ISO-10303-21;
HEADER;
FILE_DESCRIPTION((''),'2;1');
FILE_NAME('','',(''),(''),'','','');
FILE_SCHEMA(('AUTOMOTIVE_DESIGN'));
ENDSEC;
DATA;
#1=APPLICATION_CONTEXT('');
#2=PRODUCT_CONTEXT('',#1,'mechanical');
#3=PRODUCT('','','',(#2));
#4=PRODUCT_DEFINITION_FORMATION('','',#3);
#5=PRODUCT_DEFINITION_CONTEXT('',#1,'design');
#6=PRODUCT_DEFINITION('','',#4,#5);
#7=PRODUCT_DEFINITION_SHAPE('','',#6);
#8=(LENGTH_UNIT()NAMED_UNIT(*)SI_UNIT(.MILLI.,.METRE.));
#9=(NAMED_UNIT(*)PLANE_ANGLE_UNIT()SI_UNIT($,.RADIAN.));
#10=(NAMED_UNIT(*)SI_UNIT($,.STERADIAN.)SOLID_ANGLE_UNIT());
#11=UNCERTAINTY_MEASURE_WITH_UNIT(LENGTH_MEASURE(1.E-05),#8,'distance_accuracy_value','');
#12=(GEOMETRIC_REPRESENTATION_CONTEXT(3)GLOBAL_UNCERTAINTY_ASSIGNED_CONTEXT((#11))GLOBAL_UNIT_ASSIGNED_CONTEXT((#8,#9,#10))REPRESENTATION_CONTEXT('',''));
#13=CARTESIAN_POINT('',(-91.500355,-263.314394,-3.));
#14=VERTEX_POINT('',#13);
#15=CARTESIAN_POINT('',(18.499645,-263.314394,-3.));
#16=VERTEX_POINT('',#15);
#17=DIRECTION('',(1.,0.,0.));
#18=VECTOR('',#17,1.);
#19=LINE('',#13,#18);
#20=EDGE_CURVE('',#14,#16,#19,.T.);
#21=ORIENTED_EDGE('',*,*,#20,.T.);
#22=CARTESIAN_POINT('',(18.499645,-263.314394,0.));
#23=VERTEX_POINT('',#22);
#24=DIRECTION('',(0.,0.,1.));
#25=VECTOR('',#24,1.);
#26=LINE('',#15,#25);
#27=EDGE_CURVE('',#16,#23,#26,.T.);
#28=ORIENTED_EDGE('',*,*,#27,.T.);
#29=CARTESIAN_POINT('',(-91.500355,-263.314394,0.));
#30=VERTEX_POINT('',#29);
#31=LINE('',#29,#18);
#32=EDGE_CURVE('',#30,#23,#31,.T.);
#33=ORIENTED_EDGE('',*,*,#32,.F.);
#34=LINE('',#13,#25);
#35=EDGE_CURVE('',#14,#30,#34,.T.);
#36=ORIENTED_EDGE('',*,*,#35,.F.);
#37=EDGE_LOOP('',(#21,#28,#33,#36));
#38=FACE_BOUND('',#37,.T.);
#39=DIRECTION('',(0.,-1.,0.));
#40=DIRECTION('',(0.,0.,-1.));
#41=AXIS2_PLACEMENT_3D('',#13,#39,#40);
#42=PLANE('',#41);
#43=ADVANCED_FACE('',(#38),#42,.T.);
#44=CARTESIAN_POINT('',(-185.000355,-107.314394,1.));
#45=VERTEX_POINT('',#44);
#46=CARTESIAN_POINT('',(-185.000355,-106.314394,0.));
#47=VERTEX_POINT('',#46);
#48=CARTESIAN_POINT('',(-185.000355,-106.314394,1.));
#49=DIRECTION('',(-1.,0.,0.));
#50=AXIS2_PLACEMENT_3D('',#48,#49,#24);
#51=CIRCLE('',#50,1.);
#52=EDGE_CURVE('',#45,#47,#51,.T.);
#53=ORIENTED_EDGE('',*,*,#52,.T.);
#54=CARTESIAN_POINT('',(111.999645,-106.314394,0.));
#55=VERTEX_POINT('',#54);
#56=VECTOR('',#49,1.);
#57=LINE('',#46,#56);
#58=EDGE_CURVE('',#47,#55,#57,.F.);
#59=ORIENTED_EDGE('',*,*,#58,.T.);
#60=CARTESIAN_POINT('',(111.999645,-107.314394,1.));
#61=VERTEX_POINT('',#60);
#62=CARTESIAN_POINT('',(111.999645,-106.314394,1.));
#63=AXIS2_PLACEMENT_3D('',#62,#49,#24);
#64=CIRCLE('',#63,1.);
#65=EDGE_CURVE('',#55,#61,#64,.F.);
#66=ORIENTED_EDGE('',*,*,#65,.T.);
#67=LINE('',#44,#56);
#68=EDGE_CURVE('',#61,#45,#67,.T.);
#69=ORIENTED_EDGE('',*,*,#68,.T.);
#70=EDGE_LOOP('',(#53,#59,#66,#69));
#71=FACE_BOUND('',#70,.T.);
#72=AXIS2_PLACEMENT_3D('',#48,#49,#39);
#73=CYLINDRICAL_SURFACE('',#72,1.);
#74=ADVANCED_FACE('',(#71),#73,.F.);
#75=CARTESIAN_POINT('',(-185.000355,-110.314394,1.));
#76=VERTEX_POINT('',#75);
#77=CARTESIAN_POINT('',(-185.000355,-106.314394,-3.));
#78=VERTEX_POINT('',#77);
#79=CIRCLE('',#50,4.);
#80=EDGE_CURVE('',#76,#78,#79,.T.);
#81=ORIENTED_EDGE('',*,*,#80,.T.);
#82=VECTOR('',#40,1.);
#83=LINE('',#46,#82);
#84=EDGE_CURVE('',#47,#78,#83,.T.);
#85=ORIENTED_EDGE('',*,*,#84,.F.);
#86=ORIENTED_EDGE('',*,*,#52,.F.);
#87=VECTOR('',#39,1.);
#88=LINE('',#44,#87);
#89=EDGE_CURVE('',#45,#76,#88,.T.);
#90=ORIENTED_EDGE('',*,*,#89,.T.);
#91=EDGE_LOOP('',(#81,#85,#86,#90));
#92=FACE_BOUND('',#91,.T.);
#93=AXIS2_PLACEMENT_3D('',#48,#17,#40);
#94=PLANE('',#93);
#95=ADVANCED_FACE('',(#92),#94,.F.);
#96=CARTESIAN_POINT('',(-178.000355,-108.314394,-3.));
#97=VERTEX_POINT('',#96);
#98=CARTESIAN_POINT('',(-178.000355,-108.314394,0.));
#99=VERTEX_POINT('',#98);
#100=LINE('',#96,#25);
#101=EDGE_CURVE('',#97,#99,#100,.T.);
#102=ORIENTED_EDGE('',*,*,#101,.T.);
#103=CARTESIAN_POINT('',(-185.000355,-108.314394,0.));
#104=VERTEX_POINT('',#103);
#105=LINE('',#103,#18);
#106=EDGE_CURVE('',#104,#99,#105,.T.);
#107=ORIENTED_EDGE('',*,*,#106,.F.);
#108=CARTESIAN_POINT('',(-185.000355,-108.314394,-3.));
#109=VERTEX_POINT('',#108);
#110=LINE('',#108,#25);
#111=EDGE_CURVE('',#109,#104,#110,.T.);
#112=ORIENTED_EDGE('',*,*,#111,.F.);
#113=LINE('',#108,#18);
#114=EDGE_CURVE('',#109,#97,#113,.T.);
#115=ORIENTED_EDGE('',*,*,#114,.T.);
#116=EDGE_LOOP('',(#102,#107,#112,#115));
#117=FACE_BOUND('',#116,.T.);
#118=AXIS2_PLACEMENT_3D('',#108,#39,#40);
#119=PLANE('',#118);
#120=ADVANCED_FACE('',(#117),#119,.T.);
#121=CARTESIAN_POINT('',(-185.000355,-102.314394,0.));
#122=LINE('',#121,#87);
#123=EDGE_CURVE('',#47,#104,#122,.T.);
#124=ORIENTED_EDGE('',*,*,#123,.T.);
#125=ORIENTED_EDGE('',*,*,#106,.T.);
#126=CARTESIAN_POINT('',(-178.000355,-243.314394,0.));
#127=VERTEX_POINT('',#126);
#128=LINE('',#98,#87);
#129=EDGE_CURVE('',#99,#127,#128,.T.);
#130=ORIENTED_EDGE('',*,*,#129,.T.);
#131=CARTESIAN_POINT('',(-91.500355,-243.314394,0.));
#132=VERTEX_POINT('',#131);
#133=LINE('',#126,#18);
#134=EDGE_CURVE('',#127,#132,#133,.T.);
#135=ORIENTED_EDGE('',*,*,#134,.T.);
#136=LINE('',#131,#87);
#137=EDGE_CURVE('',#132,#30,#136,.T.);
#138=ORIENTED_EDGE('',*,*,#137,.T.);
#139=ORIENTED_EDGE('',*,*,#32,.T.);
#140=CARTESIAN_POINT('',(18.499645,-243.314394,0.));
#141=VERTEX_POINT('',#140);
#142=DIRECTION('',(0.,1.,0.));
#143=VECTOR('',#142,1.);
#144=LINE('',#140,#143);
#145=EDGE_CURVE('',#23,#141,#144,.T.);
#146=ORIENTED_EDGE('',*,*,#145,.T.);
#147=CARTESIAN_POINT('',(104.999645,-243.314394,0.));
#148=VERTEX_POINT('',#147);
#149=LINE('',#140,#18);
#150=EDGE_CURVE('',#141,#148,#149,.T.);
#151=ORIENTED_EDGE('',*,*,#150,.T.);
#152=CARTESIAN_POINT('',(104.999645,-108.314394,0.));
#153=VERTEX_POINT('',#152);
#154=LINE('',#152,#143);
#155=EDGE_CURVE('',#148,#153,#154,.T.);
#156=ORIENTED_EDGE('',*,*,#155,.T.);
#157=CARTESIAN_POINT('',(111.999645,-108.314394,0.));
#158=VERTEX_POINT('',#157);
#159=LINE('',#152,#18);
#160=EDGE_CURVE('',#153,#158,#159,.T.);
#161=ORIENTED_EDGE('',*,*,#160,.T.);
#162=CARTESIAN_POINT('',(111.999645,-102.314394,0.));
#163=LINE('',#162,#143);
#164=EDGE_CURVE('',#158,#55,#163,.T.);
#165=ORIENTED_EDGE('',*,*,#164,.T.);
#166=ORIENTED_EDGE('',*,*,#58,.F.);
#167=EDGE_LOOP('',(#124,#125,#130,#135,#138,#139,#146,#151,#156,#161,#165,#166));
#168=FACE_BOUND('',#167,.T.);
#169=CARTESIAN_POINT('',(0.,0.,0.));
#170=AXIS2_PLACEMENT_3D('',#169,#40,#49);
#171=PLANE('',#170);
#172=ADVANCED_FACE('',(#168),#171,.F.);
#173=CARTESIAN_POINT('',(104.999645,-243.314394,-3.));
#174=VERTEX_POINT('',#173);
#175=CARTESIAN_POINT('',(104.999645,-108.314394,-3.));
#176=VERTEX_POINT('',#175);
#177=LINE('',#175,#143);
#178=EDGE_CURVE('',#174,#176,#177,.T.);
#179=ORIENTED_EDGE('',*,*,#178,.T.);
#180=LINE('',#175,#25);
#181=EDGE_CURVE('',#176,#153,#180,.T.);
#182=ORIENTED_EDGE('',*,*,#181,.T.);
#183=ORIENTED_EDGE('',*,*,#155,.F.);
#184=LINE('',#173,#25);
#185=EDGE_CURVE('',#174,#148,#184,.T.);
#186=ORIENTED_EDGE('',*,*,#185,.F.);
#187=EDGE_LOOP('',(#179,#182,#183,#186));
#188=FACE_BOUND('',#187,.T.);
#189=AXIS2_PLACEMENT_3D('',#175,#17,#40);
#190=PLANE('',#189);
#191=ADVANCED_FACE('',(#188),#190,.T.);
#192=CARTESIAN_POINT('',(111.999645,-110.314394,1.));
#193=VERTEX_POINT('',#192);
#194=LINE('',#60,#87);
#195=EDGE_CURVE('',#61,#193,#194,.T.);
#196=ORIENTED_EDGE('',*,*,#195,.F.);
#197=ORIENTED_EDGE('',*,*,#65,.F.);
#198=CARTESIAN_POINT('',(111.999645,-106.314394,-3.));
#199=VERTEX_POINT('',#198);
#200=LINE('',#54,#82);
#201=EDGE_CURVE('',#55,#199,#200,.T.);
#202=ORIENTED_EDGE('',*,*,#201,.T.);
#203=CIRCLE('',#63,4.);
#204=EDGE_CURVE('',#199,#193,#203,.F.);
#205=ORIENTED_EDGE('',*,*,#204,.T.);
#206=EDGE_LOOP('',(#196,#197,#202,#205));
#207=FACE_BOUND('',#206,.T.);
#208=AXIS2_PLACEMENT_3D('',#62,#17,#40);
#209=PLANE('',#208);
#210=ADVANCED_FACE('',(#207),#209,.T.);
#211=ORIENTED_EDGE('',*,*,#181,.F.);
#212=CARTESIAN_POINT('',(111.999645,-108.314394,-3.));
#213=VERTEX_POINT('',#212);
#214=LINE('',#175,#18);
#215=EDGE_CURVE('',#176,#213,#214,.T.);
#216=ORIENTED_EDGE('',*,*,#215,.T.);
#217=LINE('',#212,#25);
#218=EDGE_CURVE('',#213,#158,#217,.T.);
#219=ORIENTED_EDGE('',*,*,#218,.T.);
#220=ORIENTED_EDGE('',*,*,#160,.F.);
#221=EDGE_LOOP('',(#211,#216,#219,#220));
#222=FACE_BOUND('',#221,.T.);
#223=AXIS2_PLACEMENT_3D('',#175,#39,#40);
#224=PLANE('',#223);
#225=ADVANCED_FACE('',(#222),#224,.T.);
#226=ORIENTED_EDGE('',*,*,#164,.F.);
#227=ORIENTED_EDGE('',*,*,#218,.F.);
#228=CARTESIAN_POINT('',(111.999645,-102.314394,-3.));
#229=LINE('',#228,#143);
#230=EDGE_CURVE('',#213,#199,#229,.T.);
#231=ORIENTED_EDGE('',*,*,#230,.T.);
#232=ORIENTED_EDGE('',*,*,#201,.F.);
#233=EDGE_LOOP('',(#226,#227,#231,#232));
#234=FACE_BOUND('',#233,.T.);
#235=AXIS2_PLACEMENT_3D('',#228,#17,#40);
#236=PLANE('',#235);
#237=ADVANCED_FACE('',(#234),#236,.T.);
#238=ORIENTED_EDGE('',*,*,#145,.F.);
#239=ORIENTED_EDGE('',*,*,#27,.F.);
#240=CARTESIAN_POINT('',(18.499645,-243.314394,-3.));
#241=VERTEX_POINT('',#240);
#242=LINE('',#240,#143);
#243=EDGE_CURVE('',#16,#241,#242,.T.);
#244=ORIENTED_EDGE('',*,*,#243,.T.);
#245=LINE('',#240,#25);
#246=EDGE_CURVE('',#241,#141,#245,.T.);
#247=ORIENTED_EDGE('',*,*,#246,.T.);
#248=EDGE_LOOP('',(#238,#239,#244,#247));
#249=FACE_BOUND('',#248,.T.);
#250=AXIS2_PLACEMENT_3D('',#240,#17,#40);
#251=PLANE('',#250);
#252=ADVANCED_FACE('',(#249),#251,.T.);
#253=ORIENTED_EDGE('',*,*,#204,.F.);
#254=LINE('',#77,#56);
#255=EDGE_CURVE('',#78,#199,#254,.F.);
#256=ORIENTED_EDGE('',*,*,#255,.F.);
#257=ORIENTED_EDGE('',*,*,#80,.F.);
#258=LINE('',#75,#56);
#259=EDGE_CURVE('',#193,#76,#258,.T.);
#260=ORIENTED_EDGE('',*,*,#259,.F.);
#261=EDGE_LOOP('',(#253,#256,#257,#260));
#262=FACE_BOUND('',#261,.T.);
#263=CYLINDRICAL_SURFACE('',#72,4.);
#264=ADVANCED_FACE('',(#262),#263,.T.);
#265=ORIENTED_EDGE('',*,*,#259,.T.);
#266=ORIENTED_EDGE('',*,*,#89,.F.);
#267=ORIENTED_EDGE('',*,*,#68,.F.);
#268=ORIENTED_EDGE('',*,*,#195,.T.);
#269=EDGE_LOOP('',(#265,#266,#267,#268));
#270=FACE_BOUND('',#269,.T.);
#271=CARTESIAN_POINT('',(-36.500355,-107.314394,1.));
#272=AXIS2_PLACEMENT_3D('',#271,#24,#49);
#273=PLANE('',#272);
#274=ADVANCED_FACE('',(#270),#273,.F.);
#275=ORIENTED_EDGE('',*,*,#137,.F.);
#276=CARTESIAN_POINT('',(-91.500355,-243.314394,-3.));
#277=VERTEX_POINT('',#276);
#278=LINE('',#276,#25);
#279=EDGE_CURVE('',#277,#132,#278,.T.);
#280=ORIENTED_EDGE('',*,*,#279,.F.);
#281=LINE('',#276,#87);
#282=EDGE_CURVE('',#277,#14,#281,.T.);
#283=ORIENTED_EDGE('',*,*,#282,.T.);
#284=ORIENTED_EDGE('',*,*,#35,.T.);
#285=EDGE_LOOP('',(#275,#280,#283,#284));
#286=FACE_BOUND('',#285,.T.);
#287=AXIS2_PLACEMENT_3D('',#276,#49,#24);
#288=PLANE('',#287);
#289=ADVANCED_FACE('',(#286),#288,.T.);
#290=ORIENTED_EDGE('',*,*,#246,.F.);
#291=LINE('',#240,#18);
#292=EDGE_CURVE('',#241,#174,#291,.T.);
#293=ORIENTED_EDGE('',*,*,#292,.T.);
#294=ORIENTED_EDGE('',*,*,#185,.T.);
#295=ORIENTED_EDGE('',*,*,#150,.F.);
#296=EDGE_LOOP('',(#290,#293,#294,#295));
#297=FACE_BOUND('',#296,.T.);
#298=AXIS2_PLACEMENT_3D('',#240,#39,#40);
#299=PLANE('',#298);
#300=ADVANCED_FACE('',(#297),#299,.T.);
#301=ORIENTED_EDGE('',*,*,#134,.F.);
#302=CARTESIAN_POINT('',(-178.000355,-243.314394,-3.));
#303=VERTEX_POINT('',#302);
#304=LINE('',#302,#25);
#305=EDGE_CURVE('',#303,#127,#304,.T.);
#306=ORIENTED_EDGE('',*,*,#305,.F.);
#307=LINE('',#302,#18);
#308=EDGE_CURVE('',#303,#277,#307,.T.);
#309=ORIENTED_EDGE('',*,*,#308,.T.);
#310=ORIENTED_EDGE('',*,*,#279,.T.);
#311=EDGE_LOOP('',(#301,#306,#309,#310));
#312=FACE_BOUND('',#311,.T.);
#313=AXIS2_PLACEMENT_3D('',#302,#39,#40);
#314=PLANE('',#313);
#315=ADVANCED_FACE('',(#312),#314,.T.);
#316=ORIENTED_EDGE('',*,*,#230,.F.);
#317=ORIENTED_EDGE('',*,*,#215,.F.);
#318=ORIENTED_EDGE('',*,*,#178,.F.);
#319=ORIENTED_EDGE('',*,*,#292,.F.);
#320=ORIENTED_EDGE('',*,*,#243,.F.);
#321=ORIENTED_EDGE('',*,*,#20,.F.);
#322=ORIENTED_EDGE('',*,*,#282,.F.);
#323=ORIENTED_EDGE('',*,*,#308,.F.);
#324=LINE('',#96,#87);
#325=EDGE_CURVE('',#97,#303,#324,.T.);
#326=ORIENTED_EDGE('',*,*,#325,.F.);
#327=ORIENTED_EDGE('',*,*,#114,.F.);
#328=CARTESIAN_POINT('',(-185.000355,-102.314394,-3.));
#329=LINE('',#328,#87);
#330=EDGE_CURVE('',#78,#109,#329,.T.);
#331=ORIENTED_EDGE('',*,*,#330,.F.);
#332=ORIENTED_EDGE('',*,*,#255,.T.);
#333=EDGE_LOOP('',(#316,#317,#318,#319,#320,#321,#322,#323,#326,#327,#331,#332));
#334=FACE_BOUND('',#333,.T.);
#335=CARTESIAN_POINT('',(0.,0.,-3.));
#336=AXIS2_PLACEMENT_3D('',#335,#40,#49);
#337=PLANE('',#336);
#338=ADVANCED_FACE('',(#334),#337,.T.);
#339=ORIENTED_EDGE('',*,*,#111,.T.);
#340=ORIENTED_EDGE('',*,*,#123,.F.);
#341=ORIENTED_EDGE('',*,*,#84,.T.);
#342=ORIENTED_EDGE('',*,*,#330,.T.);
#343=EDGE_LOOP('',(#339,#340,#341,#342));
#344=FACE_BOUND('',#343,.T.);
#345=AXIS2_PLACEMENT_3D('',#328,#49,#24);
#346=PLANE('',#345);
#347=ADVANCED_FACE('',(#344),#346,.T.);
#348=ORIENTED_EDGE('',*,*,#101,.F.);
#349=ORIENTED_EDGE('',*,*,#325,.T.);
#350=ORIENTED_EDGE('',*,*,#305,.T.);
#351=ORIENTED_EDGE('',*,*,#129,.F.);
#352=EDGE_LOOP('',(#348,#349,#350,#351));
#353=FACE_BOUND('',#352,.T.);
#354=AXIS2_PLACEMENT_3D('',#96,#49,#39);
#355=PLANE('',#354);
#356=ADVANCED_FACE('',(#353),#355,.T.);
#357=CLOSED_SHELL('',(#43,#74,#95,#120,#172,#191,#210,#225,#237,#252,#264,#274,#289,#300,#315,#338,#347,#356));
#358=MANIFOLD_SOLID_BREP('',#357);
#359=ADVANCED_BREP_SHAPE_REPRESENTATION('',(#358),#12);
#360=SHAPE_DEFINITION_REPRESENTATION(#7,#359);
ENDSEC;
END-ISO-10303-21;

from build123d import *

# Parameters (mm, degrees)
BASE_FLANGE1_DEPTH = 3
HEM1_START         = -185.00035483
HEM1_DEPTH         = 297
HEM1_2_DEPTH       = 297


# Read off the part's stored shape, not the designer's step: Hem1
# Sheet-metal steps are written as plain solids
with BuildPart() as part:
    # Sketch1 → Base-Flange1 (new body)
    with BuildSketch(Plane.XY):
        Polygon((18.49964517, -243.314393939), (104.99964517, -243.314393939), (104.99964517, -108.314393939), (111.99964517, -108.314393939), (111.99964517, -102.314393939), (-185.00035483, -102.314393939), (-185.00035483, -108.314393939), (-178.00035483, -108.314393939), (-178.00035483, -243.314393939), (-91.50035483, -243.314393939), (-91.50035483, -263.314393939), (18.49964517, -263.314393939), align=None)
    extrude(amount=-BASE_FLANGE1_DEPTH)

    # Hem1 outline → Hem1 (cut)
    with BuildSketch(Plane.YZ.offset(HEM1_START)):
        with BuildLine():
            Line((-102.314393939, 0), (-102.441410593, 0))
            ThreePointArc((-102.441410593, 0), (-103.864904196, -2.16227766), (-106.314393939, -3))
            Line((-106.314393939, -3), (-102.314393939, -3))
            Line((-102.314393939, -3), (-102.314393939, 0))
        make_face()
    extrude(amount=HEM1_DEPTH, mode=Mode.SUBTRACT)

    # Hem1 2 outline → Hem1 2 (add)
    with BuildSketch(Plane.YZ.offset(HEM1_START)):
        with BuildLine():
            Line((-110.314393939, 1), (-107.314393939, 1))
            ThreePointArc((-107.314393939, 1), (-105.607287158, 1.707106781), (-106.314393939, 0))
            Line((-106.314393939, 0), (-102.441410593, 0))
            ThreePointArc((-102.441410593, 0), (-105.810376769, 4.968118785), (-110.314393939, 1))
        make_face()
    extrude(amount=HEM1_2_DEPTH)


solid = part.part
